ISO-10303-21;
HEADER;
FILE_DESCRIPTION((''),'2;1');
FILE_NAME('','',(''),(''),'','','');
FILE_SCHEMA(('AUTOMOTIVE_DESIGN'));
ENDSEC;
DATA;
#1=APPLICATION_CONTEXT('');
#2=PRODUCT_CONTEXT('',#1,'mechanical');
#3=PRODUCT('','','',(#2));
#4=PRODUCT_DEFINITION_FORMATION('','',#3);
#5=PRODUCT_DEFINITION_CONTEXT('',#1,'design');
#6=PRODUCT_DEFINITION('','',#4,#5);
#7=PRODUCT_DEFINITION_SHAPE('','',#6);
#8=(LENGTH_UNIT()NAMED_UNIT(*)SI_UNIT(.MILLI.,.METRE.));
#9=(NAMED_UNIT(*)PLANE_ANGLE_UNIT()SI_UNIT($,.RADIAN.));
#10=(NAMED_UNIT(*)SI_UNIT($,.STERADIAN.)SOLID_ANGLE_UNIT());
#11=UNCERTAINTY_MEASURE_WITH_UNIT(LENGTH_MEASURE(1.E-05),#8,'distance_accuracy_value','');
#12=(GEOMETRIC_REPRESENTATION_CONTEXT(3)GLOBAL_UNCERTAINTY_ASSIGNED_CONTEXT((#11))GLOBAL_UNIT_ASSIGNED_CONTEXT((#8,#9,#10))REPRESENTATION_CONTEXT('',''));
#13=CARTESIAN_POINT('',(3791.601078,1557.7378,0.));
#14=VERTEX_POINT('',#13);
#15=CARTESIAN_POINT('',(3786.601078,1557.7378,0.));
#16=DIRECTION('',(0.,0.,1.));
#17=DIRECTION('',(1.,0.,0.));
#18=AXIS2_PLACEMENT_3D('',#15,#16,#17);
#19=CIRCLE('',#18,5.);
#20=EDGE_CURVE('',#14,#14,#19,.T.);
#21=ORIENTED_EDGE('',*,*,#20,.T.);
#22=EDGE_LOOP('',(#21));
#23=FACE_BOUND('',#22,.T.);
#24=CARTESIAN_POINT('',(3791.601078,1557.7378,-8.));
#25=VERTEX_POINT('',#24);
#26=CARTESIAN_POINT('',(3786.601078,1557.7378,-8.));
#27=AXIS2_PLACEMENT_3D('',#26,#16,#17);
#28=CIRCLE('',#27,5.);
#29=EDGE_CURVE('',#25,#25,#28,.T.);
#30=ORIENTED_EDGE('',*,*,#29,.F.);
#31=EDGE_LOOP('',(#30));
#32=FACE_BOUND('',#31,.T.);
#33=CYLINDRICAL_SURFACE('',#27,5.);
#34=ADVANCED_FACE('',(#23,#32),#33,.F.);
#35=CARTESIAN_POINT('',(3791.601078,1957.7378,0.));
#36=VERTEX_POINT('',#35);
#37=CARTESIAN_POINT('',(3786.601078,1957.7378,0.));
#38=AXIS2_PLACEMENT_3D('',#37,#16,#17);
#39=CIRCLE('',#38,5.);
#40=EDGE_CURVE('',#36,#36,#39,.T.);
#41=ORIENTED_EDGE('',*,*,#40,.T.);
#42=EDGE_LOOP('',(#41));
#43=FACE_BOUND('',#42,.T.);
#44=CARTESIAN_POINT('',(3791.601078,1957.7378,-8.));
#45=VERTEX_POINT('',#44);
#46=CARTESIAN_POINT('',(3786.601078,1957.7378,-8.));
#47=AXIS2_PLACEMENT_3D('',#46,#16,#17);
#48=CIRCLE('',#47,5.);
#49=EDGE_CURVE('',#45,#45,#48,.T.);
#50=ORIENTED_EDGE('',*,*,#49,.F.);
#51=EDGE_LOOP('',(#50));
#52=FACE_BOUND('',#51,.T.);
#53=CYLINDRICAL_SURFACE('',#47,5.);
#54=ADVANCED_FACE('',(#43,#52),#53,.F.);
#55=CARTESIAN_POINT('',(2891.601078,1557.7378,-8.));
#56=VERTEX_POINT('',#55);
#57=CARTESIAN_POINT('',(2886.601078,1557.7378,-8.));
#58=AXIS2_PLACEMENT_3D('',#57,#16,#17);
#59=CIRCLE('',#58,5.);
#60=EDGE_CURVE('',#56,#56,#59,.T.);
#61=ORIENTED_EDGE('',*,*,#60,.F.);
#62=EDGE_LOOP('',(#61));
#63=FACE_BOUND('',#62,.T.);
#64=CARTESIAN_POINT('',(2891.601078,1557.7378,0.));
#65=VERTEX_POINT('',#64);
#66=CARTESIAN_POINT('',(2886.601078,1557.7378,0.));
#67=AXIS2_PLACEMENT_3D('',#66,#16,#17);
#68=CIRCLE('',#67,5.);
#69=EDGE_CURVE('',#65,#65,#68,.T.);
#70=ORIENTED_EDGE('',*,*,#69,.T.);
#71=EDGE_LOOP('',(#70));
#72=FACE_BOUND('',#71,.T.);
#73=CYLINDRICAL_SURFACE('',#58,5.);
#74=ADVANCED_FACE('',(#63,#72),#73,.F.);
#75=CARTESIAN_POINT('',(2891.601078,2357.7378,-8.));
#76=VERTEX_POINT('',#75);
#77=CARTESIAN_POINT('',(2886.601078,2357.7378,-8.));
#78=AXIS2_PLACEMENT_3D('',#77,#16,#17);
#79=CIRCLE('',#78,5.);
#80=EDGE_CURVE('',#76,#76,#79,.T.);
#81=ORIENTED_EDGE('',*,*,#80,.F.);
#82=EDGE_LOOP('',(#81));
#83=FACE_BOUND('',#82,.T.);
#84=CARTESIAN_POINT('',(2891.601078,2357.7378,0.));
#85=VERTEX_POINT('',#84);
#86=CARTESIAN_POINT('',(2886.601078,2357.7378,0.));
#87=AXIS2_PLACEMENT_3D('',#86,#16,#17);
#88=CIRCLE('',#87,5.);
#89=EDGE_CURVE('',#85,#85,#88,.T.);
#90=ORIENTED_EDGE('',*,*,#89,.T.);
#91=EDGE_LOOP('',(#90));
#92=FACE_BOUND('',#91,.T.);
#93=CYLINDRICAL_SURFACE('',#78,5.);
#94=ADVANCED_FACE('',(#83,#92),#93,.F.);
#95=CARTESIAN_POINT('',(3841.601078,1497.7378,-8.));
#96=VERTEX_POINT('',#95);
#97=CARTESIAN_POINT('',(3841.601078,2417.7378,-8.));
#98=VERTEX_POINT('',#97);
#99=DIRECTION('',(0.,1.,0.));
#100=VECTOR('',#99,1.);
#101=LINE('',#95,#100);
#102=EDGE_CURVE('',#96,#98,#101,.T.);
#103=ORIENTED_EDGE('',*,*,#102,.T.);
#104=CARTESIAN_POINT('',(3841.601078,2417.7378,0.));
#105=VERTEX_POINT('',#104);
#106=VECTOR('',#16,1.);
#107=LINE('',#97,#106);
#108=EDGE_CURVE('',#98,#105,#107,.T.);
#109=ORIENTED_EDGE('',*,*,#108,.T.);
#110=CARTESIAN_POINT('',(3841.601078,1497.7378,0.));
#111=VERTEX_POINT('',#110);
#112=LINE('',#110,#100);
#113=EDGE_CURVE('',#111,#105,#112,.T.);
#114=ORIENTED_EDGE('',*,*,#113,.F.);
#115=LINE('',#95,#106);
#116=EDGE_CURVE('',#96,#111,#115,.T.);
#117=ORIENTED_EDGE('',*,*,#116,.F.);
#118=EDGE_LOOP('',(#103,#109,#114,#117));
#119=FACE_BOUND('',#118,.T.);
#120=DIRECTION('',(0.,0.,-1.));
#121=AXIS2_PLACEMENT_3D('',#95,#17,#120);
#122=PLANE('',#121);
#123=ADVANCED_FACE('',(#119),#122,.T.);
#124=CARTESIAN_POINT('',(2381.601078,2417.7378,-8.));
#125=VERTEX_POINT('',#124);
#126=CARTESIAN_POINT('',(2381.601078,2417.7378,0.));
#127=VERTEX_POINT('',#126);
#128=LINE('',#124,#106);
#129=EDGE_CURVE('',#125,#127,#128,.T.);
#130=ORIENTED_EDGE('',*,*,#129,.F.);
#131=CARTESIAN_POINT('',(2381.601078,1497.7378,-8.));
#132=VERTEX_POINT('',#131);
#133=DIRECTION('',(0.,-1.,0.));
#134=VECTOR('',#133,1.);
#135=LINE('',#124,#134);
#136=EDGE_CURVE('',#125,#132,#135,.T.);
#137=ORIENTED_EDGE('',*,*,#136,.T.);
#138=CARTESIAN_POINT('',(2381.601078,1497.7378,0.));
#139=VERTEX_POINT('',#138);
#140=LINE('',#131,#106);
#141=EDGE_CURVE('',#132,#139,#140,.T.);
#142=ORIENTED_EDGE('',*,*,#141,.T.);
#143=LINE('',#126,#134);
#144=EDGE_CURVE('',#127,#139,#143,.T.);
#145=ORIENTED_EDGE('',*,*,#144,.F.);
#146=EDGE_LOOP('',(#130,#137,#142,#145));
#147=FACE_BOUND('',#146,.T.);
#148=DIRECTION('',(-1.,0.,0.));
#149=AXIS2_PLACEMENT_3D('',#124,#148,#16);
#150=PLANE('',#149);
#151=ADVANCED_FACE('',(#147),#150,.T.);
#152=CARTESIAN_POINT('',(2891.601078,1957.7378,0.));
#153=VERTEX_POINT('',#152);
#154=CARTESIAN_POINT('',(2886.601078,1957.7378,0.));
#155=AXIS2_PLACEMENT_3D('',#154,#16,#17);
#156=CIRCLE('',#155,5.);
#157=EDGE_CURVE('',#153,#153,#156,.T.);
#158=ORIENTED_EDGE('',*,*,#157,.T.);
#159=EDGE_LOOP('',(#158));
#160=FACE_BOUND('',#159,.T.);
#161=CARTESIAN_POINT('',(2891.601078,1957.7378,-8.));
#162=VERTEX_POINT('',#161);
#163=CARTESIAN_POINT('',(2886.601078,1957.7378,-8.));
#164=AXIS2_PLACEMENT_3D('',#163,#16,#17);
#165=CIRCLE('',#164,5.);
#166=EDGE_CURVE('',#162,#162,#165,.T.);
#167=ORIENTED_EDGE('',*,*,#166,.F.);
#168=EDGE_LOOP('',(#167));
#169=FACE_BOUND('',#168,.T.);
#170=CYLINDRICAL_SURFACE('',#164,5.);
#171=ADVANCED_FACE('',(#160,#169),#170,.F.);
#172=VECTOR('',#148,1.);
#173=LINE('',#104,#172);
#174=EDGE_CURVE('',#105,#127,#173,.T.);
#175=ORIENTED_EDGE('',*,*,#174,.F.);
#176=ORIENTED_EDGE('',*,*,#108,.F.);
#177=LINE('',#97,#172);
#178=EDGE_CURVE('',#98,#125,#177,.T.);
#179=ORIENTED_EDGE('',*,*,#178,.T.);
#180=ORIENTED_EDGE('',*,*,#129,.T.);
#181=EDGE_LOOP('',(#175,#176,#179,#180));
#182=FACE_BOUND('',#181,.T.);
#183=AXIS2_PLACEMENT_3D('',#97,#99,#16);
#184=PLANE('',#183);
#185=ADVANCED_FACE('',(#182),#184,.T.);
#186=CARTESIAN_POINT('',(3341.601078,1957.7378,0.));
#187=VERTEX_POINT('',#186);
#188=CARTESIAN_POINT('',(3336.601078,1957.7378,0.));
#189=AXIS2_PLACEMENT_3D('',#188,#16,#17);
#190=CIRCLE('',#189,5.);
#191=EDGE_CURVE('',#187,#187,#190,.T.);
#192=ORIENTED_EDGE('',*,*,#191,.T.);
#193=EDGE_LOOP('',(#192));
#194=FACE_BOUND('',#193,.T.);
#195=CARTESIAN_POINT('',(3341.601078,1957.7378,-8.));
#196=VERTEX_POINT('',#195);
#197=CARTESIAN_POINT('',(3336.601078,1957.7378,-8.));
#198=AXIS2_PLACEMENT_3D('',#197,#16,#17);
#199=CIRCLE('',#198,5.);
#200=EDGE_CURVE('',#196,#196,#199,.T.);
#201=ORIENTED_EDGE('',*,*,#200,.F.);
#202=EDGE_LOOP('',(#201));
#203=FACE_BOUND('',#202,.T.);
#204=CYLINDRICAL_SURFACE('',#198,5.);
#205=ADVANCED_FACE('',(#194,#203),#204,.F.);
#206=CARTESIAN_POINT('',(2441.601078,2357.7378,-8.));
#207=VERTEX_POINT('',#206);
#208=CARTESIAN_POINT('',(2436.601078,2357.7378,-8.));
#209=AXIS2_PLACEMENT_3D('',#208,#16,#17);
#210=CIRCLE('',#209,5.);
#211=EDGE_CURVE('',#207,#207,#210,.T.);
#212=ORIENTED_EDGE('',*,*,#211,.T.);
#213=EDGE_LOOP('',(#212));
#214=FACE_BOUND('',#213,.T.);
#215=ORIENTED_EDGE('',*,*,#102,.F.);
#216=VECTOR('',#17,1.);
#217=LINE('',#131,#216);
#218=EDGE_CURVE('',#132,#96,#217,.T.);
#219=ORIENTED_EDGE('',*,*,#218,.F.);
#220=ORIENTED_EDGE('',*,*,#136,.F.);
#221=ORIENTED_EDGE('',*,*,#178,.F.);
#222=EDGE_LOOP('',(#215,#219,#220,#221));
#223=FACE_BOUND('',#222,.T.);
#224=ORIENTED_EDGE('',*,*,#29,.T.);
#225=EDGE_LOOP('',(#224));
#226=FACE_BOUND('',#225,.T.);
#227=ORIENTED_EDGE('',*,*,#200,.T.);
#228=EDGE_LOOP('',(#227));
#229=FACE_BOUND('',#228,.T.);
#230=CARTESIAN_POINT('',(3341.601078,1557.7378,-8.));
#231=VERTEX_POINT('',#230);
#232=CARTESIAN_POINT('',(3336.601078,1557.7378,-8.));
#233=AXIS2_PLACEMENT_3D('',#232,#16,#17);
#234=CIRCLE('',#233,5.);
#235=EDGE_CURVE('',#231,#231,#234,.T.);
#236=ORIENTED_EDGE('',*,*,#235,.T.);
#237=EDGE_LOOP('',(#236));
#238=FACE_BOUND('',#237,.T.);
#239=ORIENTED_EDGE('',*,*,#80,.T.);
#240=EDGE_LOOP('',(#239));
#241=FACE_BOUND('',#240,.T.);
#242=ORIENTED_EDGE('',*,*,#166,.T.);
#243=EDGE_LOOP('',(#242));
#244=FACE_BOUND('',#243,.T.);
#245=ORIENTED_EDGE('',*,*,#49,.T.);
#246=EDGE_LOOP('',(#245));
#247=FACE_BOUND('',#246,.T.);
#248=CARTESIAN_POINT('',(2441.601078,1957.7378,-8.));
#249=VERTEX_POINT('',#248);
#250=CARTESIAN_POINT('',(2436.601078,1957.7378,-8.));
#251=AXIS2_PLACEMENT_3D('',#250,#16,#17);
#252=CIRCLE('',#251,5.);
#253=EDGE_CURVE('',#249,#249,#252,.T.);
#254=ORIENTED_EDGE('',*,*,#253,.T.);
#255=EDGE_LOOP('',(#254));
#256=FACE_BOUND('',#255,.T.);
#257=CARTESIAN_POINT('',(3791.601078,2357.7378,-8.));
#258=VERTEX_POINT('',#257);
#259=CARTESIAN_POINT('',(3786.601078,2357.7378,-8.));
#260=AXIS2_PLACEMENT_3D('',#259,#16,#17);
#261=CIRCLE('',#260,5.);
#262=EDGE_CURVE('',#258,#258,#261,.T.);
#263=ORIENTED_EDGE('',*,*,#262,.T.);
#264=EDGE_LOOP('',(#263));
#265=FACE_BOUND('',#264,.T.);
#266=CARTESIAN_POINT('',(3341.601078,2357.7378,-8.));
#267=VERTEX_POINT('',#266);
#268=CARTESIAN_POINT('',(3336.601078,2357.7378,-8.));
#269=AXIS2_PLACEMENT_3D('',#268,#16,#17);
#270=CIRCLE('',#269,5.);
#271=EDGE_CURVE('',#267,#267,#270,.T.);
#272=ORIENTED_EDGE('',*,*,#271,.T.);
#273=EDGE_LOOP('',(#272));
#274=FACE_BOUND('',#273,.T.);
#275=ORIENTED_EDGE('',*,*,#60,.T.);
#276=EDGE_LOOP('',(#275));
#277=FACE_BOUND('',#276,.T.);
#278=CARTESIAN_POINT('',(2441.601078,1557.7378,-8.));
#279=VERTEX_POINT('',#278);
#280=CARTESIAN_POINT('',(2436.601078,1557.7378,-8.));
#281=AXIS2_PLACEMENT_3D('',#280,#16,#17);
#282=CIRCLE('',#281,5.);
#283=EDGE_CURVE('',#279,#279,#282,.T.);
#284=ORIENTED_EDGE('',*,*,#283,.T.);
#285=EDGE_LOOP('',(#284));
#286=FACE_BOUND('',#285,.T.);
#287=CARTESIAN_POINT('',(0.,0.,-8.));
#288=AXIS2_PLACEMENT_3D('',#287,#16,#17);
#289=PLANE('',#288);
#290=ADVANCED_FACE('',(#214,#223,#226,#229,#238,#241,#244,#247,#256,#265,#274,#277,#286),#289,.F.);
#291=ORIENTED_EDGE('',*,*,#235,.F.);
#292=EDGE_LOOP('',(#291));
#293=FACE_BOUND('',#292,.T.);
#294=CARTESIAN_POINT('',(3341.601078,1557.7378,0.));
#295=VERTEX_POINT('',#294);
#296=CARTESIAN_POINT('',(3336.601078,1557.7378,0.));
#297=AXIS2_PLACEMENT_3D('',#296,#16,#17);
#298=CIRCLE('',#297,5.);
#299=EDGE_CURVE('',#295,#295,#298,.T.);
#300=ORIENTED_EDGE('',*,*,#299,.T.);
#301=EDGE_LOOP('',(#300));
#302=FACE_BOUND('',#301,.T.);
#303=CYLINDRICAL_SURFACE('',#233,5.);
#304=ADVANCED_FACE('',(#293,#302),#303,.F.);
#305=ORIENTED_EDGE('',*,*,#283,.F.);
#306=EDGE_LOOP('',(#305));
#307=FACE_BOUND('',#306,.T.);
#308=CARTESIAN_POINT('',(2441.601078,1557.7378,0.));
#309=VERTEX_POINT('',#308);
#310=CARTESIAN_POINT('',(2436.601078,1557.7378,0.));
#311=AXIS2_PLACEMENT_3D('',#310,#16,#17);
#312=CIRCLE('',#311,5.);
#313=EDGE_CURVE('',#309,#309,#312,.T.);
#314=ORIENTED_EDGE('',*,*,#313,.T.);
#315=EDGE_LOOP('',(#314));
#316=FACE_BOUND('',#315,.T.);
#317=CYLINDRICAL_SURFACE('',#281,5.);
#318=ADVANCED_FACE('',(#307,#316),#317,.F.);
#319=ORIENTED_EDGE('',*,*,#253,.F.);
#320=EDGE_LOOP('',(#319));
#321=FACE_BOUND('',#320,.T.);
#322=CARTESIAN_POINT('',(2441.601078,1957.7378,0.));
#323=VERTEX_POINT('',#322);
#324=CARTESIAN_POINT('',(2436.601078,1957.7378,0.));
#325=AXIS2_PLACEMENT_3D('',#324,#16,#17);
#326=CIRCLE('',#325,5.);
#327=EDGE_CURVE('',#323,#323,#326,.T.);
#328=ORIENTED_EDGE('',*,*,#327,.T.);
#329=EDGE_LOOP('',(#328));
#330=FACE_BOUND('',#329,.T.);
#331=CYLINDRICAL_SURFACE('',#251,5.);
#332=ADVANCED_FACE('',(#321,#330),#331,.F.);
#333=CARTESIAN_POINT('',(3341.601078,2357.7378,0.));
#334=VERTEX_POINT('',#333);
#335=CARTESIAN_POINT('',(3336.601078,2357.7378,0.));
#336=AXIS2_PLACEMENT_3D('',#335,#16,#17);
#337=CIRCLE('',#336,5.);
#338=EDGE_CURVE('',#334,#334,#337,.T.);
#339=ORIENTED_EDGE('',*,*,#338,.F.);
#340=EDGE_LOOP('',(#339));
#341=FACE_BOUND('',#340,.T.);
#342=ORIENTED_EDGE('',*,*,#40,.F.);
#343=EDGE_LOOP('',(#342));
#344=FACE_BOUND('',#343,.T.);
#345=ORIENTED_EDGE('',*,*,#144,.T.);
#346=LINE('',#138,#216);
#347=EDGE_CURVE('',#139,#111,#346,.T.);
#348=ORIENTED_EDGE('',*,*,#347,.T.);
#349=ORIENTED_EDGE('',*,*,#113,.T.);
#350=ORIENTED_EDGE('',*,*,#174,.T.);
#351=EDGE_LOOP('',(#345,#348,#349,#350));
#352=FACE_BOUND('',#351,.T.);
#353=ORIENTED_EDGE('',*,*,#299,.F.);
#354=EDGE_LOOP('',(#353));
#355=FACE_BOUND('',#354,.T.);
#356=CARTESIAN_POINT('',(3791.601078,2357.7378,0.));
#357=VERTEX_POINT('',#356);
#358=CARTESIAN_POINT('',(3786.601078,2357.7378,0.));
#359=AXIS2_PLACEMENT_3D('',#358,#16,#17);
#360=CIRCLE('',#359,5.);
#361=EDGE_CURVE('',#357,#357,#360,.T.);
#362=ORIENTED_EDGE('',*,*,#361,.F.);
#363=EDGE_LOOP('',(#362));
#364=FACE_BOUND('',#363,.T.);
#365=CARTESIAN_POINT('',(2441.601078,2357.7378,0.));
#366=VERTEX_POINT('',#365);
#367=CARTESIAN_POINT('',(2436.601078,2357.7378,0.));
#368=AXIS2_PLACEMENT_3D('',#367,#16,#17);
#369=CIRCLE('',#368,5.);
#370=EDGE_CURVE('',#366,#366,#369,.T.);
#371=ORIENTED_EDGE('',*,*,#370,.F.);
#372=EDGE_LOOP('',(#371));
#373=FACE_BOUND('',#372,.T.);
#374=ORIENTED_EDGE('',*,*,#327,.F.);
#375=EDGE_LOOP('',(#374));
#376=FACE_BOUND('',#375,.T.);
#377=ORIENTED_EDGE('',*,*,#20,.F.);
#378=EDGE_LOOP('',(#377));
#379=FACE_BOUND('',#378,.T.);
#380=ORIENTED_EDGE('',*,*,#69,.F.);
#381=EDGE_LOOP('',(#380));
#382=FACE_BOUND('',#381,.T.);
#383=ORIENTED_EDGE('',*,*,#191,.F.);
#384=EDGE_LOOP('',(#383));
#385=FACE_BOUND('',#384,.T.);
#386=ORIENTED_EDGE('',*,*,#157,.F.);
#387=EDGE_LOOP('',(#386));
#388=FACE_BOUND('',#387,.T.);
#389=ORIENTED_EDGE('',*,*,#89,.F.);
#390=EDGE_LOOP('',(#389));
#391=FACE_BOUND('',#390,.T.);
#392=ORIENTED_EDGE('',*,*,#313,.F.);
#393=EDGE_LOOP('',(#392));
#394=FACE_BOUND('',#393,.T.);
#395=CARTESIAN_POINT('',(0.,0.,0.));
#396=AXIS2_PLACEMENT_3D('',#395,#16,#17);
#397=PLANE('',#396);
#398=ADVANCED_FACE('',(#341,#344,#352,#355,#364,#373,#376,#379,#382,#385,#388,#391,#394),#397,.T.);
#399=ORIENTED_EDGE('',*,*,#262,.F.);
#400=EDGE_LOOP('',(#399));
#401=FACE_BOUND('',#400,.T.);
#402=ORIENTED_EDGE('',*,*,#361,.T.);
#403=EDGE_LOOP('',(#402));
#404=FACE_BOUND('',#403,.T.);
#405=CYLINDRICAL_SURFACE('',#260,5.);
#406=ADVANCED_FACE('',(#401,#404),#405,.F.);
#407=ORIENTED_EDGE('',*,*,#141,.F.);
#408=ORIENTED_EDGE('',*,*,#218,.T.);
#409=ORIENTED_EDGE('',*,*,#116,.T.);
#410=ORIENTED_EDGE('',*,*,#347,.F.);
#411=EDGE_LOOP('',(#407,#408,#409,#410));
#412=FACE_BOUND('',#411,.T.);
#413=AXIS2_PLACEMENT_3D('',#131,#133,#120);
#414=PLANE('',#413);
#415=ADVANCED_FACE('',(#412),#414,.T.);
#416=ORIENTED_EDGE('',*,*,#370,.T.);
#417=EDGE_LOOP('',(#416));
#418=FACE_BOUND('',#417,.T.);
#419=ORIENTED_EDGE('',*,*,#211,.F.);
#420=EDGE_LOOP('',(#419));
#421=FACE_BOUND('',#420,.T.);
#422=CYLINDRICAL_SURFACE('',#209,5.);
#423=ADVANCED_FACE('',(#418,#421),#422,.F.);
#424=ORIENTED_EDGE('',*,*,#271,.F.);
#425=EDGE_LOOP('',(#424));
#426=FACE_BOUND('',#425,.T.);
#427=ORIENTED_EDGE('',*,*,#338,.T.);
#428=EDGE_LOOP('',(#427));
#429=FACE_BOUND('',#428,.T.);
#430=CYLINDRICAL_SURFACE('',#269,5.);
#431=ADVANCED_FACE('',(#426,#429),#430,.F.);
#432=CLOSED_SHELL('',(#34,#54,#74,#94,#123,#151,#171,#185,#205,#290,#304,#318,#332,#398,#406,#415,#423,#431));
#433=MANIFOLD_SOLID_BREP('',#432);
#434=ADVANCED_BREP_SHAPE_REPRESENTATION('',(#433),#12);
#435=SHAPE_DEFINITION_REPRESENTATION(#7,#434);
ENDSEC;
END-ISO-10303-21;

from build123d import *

# Parameters (mm, degrees)
IZIM1_W            = 1460
IZIM1_H            = 920
IZIM1_R            = 5
TABAN_FLAN_1_DEPTH = 8


# Sheet-metal steps are written as plain solids
with BuildPart() as part:
    # Çizim1 → Taban-Flanş1 (new body)
    with BuildSketch(Plane.XY):
        with Locations((3111.601078197, 1957.737800497)):
            Rectangle(IZIM1_W, IZIM1_H)
        with Locations((2436.601078197, 2357.737800497)):
            Circle(IZIM1_R, mode=Mode.SUBTRACT)
        with Locations((2886.601078197, 2357.737800497)):
            Circle(IZIM1_R, mode=Mode.SUBTRACT)
        with Locations((3336.601078197, 2357.737800497)):
            Circle(IZIM1_R, mode=Mode.SUBTRACT)
        with Locations((3786.601078197, 2357.737800497)):
            Circle(IZIM1_R, mode=Mode.SUBTRACT)
        with Locations((2436.601078197, 1957.737800497)):
            Circle(IZIM1_R, mode=Mode.SUBTRACT)
        with Locations((2886.601078197, 1957.737800497)):
            Circle(IZIM1_R, mode=Mode.SUBTRACT)
        with Locations((3336.601078197, 1957.737800497)):
            Circle(IZIM1_R, mode=Mode.SUBTRACT)
        with Locations((3786.601078197, 1957.737800497)):
            Circle(IZIM1_R, mode=Mode.SUBTRACT)
        with Locations((2436.601078197, 1557.737800497)):
            Circle(IZIM1_R, mode=Mode.SUBTRACT)
        with Locations((2886.601078197, 1557.737800497)):
            Circle(IZIM1_R, mode=Mode.SUBTRACT)
        with Locations((3336.601078197, 1557.737800497)):
            Circle(IZIM1_R, mode=Mode.SUBTRACT)
        with Locations((3786.601078197, 1557.737800497)):
            Circle(IZIM1_R, mode=Mode.SUBTRACT)
    extrude(amount=-TABAN_FLAN_1_DEPTH)


solid = part.part
